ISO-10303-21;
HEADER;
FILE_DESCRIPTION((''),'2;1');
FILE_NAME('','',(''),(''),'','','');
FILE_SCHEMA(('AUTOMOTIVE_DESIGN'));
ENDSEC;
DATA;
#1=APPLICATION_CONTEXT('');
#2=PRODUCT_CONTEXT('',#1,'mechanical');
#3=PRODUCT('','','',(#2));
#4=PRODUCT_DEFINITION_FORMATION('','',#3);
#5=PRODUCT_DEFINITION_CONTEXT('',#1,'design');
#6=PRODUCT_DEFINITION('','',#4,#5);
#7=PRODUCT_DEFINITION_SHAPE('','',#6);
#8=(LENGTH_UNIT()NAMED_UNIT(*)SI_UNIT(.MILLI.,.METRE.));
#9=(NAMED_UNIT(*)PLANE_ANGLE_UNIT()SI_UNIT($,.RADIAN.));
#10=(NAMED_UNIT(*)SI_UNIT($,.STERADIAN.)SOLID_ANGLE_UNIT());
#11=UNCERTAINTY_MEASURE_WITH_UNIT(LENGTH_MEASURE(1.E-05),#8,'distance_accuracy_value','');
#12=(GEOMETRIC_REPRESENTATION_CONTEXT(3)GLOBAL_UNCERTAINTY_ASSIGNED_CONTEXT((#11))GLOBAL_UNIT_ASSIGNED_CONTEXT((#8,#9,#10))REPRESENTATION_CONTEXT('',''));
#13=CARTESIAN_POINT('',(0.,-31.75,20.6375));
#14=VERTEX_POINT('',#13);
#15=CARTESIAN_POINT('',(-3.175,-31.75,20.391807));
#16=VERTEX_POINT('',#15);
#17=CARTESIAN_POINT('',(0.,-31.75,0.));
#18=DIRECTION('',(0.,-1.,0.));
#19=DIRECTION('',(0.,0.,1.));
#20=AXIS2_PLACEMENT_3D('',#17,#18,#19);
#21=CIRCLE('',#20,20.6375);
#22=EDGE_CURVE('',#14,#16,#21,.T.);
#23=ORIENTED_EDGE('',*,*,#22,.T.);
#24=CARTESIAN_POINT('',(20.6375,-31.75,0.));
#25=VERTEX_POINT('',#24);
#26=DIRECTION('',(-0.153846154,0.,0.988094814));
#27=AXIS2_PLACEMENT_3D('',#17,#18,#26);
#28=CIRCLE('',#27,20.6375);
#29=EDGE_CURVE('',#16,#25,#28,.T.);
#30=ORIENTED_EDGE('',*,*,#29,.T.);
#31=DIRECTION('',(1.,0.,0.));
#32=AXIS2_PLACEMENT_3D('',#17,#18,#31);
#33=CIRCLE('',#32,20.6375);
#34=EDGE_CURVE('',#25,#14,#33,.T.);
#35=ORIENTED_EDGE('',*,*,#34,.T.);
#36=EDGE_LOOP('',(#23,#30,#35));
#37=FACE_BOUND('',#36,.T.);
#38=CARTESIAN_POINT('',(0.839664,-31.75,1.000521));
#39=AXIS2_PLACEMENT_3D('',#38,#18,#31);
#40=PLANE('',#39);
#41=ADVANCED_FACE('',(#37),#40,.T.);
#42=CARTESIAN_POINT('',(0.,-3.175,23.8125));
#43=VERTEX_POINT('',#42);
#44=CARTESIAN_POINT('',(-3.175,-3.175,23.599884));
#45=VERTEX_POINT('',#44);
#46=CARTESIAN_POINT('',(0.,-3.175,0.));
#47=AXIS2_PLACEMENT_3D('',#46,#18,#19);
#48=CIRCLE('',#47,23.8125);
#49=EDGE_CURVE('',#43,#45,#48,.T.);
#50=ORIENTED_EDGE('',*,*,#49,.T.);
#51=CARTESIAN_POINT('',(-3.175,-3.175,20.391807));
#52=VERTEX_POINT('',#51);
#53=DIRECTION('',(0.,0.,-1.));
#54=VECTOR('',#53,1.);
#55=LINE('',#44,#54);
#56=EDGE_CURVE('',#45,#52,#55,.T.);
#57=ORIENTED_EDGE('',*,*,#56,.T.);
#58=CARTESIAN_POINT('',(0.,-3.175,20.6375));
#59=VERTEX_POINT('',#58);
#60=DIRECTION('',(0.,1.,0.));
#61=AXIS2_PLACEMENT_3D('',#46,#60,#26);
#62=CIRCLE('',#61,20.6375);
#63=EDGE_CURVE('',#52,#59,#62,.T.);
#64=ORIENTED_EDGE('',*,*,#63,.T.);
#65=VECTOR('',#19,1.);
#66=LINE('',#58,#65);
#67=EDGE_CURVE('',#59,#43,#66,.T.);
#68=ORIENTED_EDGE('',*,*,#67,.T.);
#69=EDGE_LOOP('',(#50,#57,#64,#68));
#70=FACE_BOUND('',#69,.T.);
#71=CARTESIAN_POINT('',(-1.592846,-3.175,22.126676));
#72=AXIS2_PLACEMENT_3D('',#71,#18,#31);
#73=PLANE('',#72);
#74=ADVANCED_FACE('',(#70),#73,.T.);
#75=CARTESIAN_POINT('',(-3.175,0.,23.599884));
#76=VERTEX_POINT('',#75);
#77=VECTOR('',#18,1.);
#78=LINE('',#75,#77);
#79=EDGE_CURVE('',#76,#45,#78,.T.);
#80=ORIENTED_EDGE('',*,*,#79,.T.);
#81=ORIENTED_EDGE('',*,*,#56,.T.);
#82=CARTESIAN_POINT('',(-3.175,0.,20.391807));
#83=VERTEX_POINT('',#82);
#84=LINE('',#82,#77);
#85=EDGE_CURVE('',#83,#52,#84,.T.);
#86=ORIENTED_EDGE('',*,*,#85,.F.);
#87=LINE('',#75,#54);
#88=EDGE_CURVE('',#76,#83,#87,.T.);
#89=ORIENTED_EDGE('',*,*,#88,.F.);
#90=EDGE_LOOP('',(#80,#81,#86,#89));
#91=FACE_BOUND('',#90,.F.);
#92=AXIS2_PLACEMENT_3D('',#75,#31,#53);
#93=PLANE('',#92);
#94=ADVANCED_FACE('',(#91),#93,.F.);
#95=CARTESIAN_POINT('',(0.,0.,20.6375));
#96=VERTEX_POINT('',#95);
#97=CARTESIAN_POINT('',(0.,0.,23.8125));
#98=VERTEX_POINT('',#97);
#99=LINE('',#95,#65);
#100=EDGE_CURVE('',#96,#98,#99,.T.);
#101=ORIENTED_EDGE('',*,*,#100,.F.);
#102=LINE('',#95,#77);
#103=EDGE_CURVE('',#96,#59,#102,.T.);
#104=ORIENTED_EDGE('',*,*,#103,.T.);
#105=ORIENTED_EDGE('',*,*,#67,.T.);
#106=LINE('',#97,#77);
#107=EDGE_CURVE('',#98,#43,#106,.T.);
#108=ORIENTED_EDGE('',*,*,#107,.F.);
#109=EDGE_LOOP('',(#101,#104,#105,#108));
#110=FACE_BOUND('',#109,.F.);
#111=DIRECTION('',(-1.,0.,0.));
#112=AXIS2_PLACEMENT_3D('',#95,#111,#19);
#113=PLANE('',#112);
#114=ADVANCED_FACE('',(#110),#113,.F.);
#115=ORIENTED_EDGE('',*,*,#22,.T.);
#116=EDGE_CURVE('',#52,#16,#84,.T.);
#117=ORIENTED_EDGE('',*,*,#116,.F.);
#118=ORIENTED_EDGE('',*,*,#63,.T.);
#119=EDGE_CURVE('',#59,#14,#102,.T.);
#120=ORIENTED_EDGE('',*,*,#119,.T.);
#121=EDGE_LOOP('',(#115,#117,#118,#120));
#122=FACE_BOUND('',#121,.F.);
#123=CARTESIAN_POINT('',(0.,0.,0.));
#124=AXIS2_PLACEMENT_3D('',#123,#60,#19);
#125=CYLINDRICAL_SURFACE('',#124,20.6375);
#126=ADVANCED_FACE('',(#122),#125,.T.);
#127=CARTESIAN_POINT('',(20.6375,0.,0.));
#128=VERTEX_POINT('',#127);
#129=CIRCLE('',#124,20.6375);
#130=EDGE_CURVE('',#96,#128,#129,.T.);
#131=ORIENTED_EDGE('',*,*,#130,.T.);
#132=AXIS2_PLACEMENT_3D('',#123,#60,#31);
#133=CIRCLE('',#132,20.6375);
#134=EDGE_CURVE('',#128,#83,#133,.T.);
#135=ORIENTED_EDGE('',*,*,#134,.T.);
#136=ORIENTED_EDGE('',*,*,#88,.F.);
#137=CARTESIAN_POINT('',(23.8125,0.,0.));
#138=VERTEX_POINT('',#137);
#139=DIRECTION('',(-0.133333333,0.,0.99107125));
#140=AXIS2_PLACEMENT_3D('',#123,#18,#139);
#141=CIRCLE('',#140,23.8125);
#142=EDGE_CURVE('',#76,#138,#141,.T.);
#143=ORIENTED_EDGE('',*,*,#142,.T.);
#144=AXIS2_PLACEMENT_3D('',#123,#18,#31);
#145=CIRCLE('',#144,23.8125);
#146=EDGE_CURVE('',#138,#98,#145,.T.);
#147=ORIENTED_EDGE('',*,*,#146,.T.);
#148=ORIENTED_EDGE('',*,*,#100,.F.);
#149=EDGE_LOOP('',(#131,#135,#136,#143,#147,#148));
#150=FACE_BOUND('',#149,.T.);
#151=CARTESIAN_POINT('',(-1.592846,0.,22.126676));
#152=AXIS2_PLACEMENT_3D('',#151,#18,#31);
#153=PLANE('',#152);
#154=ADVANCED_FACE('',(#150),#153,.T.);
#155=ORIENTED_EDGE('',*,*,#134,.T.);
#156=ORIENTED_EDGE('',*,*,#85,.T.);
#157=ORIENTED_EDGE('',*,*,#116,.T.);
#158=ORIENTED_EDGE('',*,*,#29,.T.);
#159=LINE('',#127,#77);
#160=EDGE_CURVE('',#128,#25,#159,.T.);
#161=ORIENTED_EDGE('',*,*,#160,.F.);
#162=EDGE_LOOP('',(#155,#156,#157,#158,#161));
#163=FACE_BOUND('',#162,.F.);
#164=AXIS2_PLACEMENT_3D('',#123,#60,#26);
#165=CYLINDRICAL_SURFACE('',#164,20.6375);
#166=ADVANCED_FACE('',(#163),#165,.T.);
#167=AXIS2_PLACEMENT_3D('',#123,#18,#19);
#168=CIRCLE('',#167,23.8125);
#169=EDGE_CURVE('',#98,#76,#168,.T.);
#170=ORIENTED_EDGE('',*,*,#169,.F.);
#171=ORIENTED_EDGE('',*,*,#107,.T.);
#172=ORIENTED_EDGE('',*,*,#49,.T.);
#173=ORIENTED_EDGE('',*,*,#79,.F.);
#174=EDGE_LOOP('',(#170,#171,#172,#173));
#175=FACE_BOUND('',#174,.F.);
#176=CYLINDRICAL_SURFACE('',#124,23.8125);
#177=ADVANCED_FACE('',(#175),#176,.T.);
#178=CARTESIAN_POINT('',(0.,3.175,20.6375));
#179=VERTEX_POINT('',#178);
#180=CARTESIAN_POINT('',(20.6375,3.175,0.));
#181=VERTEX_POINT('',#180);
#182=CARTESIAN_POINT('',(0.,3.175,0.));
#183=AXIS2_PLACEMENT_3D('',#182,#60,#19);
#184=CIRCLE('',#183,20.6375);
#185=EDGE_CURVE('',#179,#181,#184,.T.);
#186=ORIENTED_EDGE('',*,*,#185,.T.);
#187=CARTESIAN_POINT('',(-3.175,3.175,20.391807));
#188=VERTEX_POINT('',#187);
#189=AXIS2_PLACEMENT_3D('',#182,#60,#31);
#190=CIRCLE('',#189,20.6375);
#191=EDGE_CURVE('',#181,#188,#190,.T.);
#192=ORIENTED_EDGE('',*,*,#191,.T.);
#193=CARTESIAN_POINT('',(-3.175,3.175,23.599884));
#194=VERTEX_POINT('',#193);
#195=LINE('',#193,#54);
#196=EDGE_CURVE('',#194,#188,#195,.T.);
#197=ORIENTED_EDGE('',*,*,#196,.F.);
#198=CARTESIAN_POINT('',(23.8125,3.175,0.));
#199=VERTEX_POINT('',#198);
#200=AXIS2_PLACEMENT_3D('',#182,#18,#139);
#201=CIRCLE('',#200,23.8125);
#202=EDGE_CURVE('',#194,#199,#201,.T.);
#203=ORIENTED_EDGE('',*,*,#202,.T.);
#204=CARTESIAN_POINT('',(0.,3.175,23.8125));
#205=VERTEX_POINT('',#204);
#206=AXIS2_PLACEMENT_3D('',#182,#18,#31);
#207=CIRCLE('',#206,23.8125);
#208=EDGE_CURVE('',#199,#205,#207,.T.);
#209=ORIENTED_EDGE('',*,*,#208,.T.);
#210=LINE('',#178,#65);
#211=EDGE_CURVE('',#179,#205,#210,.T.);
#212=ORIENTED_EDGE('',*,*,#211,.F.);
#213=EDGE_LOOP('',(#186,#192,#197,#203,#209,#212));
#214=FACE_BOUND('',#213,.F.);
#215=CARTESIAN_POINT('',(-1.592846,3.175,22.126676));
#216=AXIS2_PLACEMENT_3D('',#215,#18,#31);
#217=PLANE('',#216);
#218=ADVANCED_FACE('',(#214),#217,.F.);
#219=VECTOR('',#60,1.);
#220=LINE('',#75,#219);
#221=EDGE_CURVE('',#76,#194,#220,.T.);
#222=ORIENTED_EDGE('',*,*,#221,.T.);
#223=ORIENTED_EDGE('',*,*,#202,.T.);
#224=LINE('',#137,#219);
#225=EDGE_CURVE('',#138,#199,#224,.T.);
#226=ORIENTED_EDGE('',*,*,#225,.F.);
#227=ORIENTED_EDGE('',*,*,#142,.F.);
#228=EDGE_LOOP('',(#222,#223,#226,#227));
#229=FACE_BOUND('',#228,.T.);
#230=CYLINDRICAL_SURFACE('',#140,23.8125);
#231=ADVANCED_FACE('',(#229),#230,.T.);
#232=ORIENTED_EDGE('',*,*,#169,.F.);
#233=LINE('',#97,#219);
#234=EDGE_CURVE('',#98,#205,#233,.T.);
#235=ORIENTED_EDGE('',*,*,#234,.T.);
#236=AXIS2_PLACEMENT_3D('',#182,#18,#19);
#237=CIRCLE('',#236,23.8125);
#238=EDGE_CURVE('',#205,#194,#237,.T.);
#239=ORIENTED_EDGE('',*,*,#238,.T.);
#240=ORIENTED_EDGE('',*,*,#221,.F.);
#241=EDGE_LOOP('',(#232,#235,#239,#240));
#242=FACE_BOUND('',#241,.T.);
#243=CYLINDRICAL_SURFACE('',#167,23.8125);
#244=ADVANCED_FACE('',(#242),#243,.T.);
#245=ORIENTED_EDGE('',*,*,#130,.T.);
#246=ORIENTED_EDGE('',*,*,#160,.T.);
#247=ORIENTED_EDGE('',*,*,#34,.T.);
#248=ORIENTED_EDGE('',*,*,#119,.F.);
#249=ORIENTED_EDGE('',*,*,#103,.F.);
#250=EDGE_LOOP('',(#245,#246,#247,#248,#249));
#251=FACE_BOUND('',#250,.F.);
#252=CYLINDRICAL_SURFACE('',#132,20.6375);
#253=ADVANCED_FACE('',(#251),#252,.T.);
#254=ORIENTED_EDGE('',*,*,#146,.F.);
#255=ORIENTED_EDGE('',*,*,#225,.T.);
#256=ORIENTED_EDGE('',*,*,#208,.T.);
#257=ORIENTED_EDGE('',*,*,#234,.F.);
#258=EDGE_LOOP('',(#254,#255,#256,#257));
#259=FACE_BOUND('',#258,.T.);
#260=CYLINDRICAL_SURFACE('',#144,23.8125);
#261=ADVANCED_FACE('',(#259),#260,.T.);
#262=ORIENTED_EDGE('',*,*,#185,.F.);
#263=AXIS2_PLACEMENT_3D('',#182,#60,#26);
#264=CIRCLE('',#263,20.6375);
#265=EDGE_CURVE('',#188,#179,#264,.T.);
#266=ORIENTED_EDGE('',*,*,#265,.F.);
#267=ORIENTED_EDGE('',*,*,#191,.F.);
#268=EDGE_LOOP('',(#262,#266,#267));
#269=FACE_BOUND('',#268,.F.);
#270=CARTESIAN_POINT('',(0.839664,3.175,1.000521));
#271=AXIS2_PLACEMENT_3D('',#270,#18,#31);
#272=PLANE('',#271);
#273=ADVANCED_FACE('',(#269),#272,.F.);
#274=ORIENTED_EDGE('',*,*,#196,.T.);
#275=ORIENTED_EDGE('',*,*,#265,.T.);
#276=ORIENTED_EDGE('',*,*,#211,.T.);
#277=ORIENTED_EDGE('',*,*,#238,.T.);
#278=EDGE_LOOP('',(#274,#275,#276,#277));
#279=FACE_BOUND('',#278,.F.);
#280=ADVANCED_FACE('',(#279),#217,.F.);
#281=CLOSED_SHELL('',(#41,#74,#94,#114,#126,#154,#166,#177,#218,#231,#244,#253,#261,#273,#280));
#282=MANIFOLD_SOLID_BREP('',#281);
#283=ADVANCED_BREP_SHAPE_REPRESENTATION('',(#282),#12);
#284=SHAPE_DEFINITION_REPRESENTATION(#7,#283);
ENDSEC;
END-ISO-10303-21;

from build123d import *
from build123d import SkipClean  # not in build123d's __all__

# Parameters (mm, degrees)
F3_DEPTH = 3.175
F4_DEPTH = 31.75
F5_DEPTH = 3.175
F6_DEPTH = 3.175


# Not quite as in the source:
# - a length typed as a fraction of an inch, garbled in the dataset ("3 / 203.2 mm" for 3/8 in), is restored


with BuildPart() as f3:
    # F2 (on Front) → F3 (new body)
    with BuildSketch(Plane.XZ):
        with BuildLine():
            Line((-3.175, 23.5998841364), (-3.175, 20.3918067186))
            ThreePointArc((-3.175, 20.3918067186), (-1.5922460699, 20.5759849996), (0, 20.6375))
            Line((0, 20.6375), (0, 23.8125))
            ThreePointArc((0, 23.8125), (-1.591055507, 23.7592865765), (-3.175, 23.5998841364))
        make_face()
        with BuildLine():
            ThreePointArc((20.6375, 0), (-13.4235305294, -15.6753065161), (-3.175, 20.3918067186))
            Line((-3.175, 20.3918067186), (-3.175, 23.5998841364))
            ThreePointArc((-3.175, 23.5998841364), (-15.6753065161, -17.9253987926), (23.8125, 0))
            ThreePointArc((23.8125, 0), (16.837980227, 16.837980227), (0, 23.8125))
            Line((0, 23.8125), (0, 20.6375))
            ThreePointArc((0, 20.6375), (14.5929161967, 14.5929161967), (20.6375, 0))
        make_face()
    extrude(amount=-F3_DEPTH)

    # F2 (on Front) → F4 (join)
    with BuildSketch(Plane.XZ):
        with BuildLine():
            ThreePointArc((0, 20.6375), (-1.5922460699, 20.5759849996), (-3.175, 20.3918067186))
            ThreePointArc((-3.175, 20.3918067186), (-13.4235305294, -15.6753065161), (20.6375, 0))
            ThreePointArc((20.6375, 0), (14.5929161967, 14.5929161967), (0, 20.6375))
        make_face()
    extrude(amount=F4_DEPTH)

    # F2 (on Front) → F5 (join)
    with BuildSketch(Plane.XZ):
        with BuildLine():
            Line((-3.175, 23.5998841364), (-3.175, 20.3918067186))
            ThreePointArc((-3.175, 20.3918067186), (-1.5922460699, 20.5759849996), (0, 20.6375))
            Line((0, 20.6375), (0, 23.8125))
            ThreePointArc((0, 23.8125), (-1.591055507, 23.7592865765), (-3.175, 23.5998841364))
        make_face()
    with SkipClean():  # cleaning this boolean's faces spoils the solid; the shape is the same uncleaned
        extrude(amount=F5_DEPTH)

    # F2 (on Front) → F6 (join)
    with BuildSketch(Plane.XZ):
        with BuildLine():
            ThreePointArc((0, 20.6375), (-1.5922460699, 20.5759849996), (-3.175, 20.3918067186))
            ThreePointArc((-3.175, 20.3918067186), (-13.4235305294, -15.6753065161), (20.6375, 0))
            ThreePointArc((20.6375, 0), (14.5929161967, 14.5929161967), (0, 20.6375))
        make_face()
        with BuildLine():
            Line((-3.175, 23.5998841364), (-3.175, 20.3918067186))
            ThreePointArc((-3.175, 20.3918067186), (-1.5922460699, 20.5759849996), (0, 20.6375))
            Line((0, 20.6375), (0, 23.8125))
            ThreePointArc((0, 23.8125), (-1.591055507, 23.7592865765), (-3.175, 23.5998841364))
        make_face()
    with SkipClean():  # cleaning this boolean's faces spoils the solid; the shape is the same uncleaned
        extrude(amount=-F6_DEPTH)


solid = f3.part
